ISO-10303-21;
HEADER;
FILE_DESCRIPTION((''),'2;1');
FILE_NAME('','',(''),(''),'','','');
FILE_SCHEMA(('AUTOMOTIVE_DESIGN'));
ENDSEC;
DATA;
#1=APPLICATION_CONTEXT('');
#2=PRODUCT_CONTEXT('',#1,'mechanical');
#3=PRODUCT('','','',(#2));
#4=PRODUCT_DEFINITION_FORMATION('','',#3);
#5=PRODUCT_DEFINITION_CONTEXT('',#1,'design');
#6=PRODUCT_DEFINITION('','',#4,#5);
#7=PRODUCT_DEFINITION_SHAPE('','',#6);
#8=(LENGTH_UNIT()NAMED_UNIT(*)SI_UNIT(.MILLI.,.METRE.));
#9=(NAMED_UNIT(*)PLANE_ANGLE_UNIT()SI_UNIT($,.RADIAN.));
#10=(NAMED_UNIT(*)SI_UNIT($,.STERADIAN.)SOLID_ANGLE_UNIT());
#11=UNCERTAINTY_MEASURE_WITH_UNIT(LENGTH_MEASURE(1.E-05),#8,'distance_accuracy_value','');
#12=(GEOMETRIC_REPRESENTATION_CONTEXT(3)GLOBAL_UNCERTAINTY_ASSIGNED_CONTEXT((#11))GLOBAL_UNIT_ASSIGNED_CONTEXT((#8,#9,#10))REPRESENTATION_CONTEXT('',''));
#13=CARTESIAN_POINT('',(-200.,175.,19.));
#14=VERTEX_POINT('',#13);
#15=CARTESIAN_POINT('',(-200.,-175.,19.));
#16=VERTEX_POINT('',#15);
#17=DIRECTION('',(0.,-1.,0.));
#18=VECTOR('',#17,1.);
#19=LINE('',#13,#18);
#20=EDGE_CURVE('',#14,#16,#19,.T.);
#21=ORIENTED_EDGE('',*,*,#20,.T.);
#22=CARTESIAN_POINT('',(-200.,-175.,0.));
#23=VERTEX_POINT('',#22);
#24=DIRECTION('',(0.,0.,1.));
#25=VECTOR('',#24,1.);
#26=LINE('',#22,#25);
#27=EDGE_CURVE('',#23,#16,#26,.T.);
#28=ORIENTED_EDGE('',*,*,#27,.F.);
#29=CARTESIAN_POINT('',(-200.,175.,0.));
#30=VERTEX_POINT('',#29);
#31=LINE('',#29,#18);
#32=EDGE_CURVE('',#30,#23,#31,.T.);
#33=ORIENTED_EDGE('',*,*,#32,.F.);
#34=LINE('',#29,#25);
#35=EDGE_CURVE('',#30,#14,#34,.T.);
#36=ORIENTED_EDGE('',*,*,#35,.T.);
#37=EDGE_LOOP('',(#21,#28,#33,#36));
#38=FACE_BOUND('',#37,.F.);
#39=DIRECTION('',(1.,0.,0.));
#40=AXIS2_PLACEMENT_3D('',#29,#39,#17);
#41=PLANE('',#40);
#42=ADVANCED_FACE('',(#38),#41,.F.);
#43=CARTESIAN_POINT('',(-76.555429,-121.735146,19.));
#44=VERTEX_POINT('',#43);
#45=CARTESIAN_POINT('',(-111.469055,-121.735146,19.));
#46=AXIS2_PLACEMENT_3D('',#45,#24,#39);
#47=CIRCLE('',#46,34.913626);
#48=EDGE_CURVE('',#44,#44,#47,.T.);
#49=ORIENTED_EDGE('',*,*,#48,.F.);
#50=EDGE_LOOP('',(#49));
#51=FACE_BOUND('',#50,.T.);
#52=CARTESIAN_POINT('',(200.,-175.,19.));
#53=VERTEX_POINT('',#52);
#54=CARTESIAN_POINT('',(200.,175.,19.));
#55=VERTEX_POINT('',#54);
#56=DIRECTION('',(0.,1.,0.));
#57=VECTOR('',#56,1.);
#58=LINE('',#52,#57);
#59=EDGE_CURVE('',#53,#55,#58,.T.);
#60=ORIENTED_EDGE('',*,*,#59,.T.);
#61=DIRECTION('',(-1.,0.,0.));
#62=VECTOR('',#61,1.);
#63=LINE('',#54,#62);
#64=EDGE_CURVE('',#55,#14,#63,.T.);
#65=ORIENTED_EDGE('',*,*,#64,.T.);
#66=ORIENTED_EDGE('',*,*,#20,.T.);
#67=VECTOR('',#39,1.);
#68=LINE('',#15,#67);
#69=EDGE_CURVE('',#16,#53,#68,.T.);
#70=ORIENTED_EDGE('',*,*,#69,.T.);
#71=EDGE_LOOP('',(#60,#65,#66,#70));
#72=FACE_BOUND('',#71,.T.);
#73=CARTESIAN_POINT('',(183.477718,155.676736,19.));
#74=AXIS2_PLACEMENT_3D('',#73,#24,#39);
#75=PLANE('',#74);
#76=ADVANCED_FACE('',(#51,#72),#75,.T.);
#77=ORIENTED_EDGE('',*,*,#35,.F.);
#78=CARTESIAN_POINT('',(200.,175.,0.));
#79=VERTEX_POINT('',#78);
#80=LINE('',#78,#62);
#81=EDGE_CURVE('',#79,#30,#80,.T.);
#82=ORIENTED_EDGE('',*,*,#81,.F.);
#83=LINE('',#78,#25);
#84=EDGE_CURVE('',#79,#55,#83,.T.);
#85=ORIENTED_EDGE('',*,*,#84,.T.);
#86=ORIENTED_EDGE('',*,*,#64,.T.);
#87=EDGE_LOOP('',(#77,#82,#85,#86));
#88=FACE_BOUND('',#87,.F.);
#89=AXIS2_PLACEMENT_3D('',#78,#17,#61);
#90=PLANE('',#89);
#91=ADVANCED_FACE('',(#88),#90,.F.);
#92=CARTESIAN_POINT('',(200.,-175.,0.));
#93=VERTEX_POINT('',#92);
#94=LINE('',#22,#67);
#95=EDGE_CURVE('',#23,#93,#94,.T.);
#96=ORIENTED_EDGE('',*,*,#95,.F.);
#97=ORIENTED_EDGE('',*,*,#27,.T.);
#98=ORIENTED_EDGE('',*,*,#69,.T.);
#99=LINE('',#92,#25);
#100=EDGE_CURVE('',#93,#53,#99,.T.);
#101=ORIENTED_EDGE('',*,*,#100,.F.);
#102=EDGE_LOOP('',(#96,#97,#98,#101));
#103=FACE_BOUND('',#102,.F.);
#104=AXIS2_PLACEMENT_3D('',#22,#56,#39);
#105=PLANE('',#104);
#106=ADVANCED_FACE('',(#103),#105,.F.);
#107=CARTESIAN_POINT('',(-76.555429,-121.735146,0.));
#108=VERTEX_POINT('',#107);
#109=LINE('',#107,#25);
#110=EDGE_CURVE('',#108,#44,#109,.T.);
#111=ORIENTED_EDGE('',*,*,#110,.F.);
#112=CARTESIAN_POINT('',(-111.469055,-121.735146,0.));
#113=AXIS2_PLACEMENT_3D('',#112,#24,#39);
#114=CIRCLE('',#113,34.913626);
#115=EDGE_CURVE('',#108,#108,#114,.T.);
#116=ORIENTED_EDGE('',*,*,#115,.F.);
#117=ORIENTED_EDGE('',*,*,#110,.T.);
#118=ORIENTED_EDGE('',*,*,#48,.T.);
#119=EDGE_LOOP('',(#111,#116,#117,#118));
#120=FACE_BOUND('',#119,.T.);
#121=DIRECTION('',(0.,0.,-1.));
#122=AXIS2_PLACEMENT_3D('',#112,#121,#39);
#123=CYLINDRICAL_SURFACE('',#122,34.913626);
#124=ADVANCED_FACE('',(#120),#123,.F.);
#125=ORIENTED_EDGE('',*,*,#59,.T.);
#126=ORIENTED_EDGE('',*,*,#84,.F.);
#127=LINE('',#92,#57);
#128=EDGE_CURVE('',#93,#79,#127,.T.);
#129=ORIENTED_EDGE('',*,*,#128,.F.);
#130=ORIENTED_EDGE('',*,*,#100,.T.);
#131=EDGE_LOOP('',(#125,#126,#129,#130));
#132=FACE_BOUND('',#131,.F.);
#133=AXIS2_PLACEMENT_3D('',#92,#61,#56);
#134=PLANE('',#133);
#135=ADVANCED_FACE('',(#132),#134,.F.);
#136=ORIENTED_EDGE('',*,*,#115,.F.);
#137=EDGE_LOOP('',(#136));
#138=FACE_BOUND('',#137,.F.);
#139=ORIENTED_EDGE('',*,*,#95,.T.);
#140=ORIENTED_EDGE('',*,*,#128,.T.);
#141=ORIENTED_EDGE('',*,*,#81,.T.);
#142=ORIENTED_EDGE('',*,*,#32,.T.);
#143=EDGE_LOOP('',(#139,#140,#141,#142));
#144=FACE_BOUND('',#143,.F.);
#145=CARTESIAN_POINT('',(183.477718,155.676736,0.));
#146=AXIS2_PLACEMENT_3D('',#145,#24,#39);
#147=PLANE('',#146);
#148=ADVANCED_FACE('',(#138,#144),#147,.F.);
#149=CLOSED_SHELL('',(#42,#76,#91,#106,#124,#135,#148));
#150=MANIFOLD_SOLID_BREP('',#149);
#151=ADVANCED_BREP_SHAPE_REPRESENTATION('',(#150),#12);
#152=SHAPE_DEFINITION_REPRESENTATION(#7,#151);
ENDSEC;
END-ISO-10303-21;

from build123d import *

# Parameters (mm, degrees)
F0_R     = 34.9136260122
F1_DEPTH = 19
F2_DEPTH = 543
F3_DEPTH = 543


# Not quite as in the source:
# - an extrude ends at something that could not be found from the text; its depth is read off the source's solid


with BuildPart() as f1:
    # F0 (on Top) → F1 (new body)
    with BuildSketch(Plane.XY):
        with BuildLine():
            Line((200, 110.9662795378), (200, 175))
            Line((200, 175), (141.3804350425, 175))
            add(Edge.make_bspline(
                [(141.3804350425, 175), (156.8649910086, 175), (190.60117535, 168.7984586395), (200, 130.1435418358), (200, 110.9662795378)],
                knots=[0, 0, 0, 0, 0.4762392851, 1, 1, 1, 1], degree=3))
        make_face()
        with BuildLine():
            add(Edge.make_bspline(
                [(141.3804350425, 175), (156.8649910086, 175), (190.60117535, 168.7984586395), (200, 130.1435418358), (200, 110.9662795378)],
                knots=[0, 0, 0, 0, 0.4762392851, 1, 1, 1, 1], degree=3))
            Line((141.3804350425, 175), (-137.7466996101, 175))
            add(Edge.make_bspline(
                [(-200, 108.9276008911), (-200, 127.4557680251), (-189.1867570844, 163.9441482544), (-156.7886150254, 175), (-137.7466996101, 175)],
                knots=[0, 0, 0, 0, 0.5072026371, 1, 1, 1, 1], degree=3))
            Line((-200, 108.9276008911), (-200, -122.5906014442))
            add(Edge.make_bspline(
                [(-147.5979983807, -175), (-157.9488683475, -174.1189344774), (-192.8861581663, -165.8033781762), (-198.1868907749, -133.2250279634), (-200, -122.5906014442)],
                knots=[0, 0, 0, 0, 0.5043810007, 1, 1, 1, 1], degree=3))
            Line((-147.5979983807, -175), (130.1678889743, -175))
            add(Edge.make_bspline(
                [(200, -116.7001660973), (200, -125.782076666), (189.6771600262, -168.0094712369), (144.6769061507, -175), (130.1678889743, -175)],
                knots=[0, 0, 0, 0, 0.4745951866, 1, 1, 1, 1], degree=3))
            Line((200, -116.7001660973), (200, 110.9662795378))
        make_face()
        with Locations((-111.4690546889, -121.7351463744)):
            Circle(F0_R, mode=Mode.SUBTRACT)
        with BuildLine():
            add(Edge.make_bspline(
                [(-200, 108.9276008911), (-200, 127.4557680251), (-189.1867570844, 163.9441482544), (-156.7886150254, 175), (-137.7466996101, 175)],
                knots=[0, 0, 0, 0, 0.5072026371, 1, 1, 1, 1], degree=3))
            Line((-137.7466996101, 175), (-200, 175))
            Line((-200, 175), (-200, 108.9276008911))
        make_face()
        with BuildLine():
            Line((200, -175), (200, -116.7001660973))
            add(Edge.make_bspline(
                [(200, -116.7001660973), (200, -125.782076666), (189.6771600262, -168.0094712369), (144.6769061507, -175), (130.1678889743, -175)],
                knots=[0, 0, 0, 0, 0.4745951866, 1, 1, 1, 1], degree=3))
            Line((130.1678889743, -175), (200, -175))
        make_face()
        with BuildLine():
            add(Edge.make_bspline(
                [(-147.5979983807, -175), (-157.9488683475, -174.1189344774), (-192.8861581663, -165.8033781762), (-198.1868907749, -133.2250279634), (-200, -122.5906014442)],
                knots=[0, 0, 0, 0, 0.5043810007, 1, 1, 1, 1], degree=3))
            Line((-200, -122.5906014442), (-200, -175))
            Line((-200, -175), (-147.5979983807, -175))
        make_face()
    extrude(amount=F1_DEPTH)

    # F0 (on Top) → F2 (cut, through all)
    with BuildSketch(Plane.XY):
        with Locations((-111.4690546889, -121.7351463744)):
            Circle(F0_R)
    extrude(amount=-F2_DEPTH, mode=Mode.SUBTRACT)

    # F0 (on Top) → F3 (cut, through all)
    with BuildSketch(Plane.XY):
        with BuildLine():
            add(Edge.make_bspline(
                [(-147.5979983807, -175), (-157.9488683475, -174.1189344774), (-192.8861581663, -165.8033781762), (-198.1868907749, -133.2250279634), (-200, -122.5906014442)],
                knots=[0, 0, 0, 0, 0.5043810007, 1, 1, 1, 1], degree=3))
            Line((-200, -122.5906014442), (-200, -175))
            Line((-200, -175), (-147.5979983807, -175))
        make_face()
    extrude(amount=-F3_DEPTH, mode=Mode.SUBTRACT)


solid = f1.part
